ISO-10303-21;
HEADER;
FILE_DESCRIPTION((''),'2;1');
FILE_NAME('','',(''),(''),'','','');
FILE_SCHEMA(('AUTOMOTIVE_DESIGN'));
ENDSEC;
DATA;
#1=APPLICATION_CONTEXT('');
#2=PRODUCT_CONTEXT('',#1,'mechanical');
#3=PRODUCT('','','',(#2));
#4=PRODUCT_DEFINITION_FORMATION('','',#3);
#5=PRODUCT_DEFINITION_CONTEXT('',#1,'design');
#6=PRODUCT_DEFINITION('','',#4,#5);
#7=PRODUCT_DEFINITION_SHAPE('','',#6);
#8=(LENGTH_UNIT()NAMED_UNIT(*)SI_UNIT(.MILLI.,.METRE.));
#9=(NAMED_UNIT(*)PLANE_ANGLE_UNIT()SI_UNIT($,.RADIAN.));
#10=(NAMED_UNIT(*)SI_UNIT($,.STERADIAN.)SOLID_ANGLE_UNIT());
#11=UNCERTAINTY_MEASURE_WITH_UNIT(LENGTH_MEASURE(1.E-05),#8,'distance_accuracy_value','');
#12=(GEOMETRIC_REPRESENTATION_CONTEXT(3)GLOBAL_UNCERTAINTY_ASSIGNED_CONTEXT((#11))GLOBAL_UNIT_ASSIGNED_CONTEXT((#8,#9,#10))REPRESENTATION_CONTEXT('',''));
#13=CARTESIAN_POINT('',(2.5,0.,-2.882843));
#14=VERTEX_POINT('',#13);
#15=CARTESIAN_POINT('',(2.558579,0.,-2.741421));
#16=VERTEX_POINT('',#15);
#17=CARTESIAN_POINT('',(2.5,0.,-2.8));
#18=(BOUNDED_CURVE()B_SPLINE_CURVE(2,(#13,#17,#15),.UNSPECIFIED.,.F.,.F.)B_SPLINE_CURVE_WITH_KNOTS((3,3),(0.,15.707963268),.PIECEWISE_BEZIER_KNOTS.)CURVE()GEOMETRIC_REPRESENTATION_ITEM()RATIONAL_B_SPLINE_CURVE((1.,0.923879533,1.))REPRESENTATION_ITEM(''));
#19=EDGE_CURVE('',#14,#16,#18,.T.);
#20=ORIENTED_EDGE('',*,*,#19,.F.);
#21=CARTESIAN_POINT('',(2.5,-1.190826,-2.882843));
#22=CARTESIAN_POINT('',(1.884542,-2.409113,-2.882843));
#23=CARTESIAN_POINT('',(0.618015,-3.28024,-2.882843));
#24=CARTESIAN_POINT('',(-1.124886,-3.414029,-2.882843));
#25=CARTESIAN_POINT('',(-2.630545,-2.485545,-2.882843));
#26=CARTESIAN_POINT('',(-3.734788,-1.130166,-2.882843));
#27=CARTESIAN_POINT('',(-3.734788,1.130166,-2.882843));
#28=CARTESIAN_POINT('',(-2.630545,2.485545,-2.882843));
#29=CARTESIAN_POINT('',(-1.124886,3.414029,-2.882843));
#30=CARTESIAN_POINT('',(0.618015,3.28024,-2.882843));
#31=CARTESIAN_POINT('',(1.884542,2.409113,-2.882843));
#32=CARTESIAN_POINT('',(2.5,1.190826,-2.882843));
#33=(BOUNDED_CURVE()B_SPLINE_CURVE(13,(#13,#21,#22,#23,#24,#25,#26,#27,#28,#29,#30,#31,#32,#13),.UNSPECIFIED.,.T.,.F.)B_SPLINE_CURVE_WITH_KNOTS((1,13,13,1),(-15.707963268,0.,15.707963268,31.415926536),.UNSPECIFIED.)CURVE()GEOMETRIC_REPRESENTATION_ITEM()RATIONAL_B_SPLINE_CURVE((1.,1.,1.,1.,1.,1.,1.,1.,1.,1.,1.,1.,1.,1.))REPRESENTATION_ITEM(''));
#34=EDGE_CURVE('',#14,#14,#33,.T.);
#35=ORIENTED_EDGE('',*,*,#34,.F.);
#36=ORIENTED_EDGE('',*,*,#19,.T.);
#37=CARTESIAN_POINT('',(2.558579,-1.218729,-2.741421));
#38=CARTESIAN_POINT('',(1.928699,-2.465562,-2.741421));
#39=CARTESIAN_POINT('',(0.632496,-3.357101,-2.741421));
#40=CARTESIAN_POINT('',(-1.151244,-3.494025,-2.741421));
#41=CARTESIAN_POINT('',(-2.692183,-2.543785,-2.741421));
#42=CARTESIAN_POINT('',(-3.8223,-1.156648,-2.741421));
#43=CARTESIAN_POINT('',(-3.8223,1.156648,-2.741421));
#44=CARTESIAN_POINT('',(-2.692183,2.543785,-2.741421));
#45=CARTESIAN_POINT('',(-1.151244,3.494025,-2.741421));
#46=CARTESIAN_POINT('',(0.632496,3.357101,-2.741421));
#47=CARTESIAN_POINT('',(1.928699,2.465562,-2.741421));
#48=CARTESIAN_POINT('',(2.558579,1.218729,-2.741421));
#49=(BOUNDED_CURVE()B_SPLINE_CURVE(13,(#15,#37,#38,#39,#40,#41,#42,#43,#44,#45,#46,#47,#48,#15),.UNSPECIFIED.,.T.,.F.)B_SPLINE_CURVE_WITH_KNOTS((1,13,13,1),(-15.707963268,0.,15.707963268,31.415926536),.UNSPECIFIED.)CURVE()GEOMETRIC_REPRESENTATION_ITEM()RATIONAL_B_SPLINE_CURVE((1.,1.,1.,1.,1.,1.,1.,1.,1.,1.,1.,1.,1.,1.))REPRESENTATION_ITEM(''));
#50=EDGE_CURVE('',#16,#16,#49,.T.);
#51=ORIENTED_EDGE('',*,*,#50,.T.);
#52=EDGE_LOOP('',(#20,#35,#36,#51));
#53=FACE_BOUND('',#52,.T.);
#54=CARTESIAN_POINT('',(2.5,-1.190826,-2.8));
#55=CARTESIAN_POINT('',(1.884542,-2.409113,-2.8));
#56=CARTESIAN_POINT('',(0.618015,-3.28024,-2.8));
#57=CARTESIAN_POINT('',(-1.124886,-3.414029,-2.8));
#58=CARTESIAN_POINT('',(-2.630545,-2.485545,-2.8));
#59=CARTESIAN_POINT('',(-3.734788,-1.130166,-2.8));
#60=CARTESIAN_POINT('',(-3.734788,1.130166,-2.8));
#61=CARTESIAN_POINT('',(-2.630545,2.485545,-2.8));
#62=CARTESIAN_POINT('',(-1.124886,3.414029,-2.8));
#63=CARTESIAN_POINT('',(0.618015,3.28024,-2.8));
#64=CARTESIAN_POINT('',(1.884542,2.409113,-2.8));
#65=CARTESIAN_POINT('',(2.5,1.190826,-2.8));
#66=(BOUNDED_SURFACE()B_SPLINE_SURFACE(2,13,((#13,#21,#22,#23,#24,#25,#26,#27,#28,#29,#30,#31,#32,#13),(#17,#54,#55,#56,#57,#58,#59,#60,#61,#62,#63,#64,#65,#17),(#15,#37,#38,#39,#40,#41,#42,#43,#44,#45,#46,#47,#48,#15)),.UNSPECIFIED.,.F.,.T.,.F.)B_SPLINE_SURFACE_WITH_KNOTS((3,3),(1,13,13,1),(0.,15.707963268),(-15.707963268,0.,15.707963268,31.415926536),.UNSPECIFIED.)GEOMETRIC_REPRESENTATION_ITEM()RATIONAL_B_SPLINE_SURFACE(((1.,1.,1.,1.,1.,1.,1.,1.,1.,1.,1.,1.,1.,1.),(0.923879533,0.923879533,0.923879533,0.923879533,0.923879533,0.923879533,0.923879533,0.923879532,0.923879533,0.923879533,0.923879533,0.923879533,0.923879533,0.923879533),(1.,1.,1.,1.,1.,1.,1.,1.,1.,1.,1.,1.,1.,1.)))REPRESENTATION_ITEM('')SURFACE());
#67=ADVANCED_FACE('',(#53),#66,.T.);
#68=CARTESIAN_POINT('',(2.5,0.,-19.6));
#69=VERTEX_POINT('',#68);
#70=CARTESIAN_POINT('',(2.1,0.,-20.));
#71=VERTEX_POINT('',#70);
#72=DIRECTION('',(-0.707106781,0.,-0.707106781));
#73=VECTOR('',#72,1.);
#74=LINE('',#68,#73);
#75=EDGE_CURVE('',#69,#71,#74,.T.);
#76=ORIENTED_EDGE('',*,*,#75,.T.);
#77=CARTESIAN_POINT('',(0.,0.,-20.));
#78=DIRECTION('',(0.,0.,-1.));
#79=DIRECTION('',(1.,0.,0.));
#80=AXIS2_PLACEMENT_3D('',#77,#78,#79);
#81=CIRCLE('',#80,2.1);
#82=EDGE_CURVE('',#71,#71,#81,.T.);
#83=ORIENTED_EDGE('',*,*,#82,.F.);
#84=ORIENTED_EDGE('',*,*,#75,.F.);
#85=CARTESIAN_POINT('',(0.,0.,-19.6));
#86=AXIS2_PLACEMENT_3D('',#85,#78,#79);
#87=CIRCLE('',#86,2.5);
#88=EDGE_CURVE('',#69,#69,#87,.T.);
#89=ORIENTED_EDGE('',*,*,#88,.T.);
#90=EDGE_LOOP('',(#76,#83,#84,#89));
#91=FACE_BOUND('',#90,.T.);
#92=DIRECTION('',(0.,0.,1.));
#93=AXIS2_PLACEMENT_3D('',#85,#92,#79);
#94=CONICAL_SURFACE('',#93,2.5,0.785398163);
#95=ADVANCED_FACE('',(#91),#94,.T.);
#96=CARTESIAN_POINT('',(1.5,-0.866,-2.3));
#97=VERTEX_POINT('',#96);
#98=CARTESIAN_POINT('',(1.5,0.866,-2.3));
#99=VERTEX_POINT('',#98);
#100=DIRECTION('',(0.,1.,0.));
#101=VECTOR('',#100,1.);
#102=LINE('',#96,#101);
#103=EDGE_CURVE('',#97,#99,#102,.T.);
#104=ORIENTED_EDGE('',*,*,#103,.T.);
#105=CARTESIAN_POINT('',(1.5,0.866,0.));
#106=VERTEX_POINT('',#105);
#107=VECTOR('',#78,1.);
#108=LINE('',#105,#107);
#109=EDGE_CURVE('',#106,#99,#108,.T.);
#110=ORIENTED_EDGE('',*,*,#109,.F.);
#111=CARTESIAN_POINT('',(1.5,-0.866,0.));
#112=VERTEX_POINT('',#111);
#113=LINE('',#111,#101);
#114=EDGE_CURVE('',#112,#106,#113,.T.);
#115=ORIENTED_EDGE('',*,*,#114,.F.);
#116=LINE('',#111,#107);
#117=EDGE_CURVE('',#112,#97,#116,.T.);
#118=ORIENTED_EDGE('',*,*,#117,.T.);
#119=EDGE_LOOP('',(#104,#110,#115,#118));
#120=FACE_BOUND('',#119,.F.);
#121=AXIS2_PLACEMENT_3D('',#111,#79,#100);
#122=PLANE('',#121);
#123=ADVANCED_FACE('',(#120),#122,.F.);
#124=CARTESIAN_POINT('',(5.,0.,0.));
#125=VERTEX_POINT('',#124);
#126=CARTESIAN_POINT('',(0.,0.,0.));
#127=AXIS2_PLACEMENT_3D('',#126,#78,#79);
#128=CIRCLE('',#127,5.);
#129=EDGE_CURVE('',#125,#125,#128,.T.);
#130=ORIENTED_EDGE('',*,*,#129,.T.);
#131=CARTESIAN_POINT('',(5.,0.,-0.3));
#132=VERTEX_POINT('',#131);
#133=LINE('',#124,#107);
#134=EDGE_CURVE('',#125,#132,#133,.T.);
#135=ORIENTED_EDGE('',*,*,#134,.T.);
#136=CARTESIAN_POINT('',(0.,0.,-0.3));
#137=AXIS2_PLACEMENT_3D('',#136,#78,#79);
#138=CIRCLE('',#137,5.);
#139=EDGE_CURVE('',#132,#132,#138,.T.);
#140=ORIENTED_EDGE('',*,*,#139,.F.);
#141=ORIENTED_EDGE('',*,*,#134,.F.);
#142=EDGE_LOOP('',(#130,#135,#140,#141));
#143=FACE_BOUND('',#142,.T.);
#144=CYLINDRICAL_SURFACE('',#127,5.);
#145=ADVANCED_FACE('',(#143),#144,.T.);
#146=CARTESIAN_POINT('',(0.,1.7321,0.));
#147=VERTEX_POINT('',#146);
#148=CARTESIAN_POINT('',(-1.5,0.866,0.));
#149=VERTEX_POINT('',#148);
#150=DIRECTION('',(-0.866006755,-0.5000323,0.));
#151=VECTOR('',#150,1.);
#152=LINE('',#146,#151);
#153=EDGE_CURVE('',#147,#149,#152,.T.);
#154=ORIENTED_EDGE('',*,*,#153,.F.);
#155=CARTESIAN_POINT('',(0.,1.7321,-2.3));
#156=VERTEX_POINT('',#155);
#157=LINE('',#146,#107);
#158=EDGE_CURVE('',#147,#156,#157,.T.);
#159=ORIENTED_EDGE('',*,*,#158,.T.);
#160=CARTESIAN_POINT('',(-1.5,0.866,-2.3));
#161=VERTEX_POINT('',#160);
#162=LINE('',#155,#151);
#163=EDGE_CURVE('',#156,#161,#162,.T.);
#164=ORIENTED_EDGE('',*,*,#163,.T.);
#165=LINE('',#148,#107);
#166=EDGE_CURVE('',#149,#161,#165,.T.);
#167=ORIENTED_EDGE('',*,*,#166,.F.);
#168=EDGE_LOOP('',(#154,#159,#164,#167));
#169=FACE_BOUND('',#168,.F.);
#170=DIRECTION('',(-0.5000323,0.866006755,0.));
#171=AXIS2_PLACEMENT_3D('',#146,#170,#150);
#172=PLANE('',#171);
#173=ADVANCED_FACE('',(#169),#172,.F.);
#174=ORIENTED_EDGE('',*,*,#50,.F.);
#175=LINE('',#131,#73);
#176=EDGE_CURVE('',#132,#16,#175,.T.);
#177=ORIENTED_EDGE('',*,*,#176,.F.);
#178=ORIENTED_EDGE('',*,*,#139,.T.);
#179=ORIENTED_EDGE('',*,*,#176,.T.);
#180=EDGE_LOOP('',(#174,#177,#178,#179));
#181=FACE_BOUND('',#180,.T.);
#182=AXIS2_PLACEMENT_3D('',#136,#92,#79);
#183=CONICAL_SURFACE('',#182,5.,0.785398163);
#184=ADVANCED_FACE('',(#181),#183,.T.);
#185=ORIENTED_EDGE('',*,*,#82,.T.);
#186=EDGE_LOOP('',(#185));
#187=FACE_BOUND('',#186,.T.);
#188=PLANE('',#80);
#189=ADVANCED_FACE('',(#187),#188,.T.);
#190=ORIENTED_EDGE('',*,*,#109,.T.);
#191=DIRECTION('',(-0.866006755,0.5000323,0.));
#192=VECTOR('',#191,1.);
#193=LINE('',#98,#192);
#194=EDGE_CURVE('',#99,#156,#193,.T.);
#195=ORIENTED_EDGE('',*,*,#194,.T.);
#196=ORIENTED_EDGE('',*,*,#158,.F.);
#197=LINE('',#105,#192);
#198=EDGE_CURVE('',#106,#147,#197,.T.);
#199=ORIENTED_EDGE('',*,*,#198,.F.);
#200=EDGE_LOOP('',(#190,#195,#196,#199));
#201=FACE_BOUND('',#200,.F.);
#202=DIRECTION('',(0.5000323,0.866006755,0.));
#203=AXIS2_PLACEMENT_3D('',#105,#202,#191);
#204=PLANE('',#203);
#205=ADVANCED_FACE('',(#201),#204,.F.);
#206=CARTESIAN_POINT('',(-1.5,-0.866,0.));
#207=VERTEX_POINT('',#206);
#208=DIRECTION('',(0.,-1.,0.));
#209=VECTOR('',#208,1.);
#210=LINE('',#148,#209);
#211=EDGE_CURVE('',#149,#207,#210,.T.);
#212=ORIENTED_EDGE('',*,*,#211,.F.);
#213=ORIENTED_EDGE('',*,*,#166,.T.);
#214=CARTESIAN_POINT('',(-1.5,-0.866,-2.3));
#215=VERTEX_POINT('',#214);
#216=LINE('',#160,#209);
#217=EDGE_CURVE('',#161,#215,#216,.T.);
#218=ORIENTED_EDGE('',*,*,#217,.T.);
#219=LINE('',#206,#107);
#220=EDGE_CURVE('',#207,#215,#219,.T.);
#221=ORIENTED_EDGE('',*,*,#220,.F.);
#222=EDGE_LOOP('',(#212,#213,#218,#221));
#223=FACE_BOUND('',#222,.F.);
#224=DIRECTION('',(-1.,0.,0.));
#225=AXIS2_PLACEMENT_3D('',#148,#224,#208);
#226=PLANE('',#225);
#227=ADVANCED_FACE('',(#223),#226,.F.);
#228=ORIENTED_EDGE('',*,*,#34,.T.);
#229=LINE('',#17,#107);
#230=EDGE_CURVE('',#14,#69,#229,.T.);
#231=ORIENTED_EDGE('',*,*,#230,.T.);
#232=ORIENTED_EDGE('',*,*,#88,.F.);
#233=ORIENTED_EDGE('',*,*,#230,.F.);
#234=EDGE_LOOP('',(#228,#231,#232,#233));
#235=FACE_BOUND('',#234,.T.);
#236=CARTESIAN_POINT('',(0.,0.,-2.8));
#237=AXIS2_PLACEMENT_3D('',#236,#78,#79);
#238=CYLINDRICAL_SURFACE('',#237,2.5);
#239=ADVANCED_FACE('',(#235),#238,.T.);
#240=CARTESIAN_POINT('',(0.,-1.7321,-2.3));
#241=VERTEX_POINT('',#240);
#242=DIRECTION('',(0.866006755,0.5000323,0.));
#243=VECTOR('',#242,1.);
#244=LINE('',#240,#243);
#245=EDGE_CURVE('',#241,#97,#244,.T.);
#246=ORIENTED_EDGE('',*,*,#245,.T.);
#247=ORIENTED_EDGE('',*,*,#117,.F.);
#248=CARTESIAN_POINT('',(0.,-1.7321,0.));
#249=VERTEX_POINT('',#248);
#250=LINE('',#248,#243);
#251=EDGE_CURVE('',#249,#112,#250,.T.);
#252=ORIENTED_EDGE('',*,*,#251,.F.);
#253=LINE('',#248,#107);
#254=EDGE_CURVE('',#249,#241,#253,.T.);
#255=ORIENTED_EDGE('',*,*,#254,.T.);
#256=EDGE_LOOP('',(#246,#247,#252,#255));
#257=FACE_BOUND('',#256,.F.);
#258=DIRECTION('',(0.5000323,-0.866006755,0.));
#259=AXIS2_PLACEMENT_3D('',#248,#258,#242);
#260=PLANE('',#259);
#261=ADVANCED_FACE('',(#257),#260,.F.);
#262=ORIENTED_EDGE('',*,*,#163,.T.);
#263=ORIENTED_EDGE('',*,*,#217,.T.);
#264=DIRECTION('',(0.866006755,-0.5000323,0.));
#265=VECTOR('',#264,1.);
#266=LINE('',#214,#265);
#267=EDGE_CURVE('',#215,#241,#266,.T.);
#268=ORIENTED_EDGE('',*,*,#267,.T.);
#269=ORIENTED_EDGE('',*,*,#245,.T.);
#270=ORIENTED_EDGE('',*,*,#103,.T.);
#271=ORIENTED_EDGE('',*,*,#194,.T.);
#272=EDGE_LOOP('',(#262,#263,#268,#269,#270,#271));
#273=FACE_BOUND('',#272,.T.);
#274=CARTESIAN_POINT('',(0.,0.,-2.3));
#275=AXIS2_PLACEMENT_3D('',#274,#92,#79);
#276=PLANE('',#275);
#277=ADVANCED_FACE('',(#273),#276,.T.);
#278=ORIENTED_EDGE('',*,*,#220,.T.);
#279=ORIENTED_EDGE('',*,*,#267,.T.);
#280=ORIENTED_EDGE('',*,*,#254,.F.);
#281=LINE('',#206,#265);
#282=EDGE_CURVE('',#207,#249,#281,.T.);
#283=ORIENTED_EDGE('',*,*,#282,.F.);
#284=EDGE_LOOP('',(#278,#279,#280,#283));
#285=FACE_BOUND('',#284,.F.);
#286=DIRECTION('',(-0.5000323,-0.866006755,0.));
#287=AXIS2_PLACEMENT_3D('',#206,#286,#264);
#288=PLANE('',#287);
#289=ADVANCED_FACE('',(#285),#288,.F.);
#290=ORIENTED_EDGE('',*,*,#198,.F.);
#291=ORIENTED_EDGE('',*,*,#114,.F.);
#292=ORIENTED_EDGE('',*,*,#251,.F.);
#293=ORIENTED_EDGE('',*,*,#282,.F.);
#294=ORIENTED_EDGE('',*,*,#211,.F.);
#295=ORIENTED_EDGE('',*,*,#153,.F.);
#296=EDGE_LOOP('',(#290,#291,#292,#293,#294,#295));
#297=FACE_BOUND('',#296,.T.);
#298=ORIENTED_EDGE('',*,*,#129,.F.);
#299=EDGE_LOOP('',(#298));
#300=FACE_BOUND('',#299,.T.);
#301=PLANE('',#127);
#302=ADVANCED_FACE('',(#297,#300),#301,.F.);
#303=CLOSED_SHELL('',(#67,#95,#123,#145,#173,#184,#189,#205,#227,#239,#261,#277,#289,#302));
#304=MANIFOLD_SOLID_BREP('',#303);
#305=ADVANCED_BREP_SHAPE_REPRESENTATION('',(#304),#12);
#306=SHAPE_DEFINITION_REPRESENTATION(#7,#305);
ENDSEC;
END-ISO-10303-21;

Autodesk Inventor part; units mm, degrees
ref_plane "YZ Plane" through (0, 0, 0) normal (1, 0, 0) x (0, 1, 0)
sketch "草圖1" plane through (0, 0, 0) normal (0, 1, 0) x (-1, 0, 0)
  point P0 (0, 0)
sketch "草圖2" plane through (0, 0, 0) normal (0, 1, 0) x (-1, 0, 0)
  line L0 (-2.5, -20) -> (0, -20)
  line L1 (-2.5, -2.8) -> (-2.5, -20)
  line L2 (-5, -0.3) -> (-2.5, -2.8)
  line L3 (-5, 0) -> (-5, -0.3)
  line L4 (0, 0) -> (-5, 0)
  line L5 (0, -20) -> (0, 0)
  line L6 (0, -20) -> (0, 0)
  line L7 (0, -24) -> (0, 4) projected
  line L8 (1, 0) -> (-6, 0) projected
  dimension "d3" = 5
  dimension "d5" = 2.5
  dimension "d7" = 20
  dimension "ParC" = 0.3
  dimension "d22" = 0
  dimension "d23" = 0
  dimension "d43" = 45
revolve "迴轉1" add sketch "草圖2" angle 360 about axis through (0, 0, -20) along (0, 0, -1)
sketch "草圖3" plane through (0, 0, 0) normal (0, 0, 1) x (1, 0, 0)
  line L0 (-1.5, 0.866) -> (-1.5, -0.866)
  line L1 (0, 1.7321) -> (-1.5, 0.866)
  line L2 (1.5, 0.866) -> (0, 1.7321)
  line L3 (1.5, -0.866) -> (1.5, 0.866)
  line L4 (0, -1.7321) -> (1.5, -0.866)
  line L5 (-1.5, -0.866) -> (0, -1.7321)
  circle A0 centre (0, 0) radius 1.5 construction
  circle A1 centre (0, 0) radius 2.5 construction
  dimension "d11" = 3
  dimension "d13" = 120
  dimension "d15" = 120
extrude "擠出1" cut sketch "草圖3" against normal blind 2.3
fillet "圓角1" radius 0.2 1 edges at (-2.5, 0, -2.8)
chamfer "倒角1" distance 0.4 angle 45 1 edges at (-2.5, 0, -20) measured on face at (-0.599, -2.4272, -14.2943)
thread "螺紋1" size "M5x0.8" class "6g" standard "ISO Metric profile" length 15.6
ref_plane "MSC_PF1" through (0, 0, 0) normal (1, 0, 0) x (0, 1, 0)
ref_plane "MSC_PT1" through (0, 0, 0) normal (0, 0, -1) x (-1, 0, 0)
equation "\"d3\" = 0.5 * dk"
equation "\"d5\" = 0.5 * NND"
equation "\"d7\" = NLG"
equation "\"d43\" = 0.5 * ang"
equation "\"d11\" = ParS"
equation "\"d16\" = ParT"
equation "\"d18\" = r"
equation "\"d19\" = 0.5 * PTC"
equation "\"d39\" = 0.5 * PTC"
equation "\"NND\" = 5"
equation "\"PTC\" = 0.8"
equation "\"ParK\" = 2.8"
equation "\"ParS\" = 3"
equation "\"ParT\" = 2.3"
equation "\"r\" = 0.2"
equation "\"NLG\" = 20"
equation "\"ang\" = 90deg"
equation "\"THREADDIA\" = NND"
equation "\"dk\" = 10"
properties part number "DIN 7991 - M5x20" material "鋼、軟鋼"
